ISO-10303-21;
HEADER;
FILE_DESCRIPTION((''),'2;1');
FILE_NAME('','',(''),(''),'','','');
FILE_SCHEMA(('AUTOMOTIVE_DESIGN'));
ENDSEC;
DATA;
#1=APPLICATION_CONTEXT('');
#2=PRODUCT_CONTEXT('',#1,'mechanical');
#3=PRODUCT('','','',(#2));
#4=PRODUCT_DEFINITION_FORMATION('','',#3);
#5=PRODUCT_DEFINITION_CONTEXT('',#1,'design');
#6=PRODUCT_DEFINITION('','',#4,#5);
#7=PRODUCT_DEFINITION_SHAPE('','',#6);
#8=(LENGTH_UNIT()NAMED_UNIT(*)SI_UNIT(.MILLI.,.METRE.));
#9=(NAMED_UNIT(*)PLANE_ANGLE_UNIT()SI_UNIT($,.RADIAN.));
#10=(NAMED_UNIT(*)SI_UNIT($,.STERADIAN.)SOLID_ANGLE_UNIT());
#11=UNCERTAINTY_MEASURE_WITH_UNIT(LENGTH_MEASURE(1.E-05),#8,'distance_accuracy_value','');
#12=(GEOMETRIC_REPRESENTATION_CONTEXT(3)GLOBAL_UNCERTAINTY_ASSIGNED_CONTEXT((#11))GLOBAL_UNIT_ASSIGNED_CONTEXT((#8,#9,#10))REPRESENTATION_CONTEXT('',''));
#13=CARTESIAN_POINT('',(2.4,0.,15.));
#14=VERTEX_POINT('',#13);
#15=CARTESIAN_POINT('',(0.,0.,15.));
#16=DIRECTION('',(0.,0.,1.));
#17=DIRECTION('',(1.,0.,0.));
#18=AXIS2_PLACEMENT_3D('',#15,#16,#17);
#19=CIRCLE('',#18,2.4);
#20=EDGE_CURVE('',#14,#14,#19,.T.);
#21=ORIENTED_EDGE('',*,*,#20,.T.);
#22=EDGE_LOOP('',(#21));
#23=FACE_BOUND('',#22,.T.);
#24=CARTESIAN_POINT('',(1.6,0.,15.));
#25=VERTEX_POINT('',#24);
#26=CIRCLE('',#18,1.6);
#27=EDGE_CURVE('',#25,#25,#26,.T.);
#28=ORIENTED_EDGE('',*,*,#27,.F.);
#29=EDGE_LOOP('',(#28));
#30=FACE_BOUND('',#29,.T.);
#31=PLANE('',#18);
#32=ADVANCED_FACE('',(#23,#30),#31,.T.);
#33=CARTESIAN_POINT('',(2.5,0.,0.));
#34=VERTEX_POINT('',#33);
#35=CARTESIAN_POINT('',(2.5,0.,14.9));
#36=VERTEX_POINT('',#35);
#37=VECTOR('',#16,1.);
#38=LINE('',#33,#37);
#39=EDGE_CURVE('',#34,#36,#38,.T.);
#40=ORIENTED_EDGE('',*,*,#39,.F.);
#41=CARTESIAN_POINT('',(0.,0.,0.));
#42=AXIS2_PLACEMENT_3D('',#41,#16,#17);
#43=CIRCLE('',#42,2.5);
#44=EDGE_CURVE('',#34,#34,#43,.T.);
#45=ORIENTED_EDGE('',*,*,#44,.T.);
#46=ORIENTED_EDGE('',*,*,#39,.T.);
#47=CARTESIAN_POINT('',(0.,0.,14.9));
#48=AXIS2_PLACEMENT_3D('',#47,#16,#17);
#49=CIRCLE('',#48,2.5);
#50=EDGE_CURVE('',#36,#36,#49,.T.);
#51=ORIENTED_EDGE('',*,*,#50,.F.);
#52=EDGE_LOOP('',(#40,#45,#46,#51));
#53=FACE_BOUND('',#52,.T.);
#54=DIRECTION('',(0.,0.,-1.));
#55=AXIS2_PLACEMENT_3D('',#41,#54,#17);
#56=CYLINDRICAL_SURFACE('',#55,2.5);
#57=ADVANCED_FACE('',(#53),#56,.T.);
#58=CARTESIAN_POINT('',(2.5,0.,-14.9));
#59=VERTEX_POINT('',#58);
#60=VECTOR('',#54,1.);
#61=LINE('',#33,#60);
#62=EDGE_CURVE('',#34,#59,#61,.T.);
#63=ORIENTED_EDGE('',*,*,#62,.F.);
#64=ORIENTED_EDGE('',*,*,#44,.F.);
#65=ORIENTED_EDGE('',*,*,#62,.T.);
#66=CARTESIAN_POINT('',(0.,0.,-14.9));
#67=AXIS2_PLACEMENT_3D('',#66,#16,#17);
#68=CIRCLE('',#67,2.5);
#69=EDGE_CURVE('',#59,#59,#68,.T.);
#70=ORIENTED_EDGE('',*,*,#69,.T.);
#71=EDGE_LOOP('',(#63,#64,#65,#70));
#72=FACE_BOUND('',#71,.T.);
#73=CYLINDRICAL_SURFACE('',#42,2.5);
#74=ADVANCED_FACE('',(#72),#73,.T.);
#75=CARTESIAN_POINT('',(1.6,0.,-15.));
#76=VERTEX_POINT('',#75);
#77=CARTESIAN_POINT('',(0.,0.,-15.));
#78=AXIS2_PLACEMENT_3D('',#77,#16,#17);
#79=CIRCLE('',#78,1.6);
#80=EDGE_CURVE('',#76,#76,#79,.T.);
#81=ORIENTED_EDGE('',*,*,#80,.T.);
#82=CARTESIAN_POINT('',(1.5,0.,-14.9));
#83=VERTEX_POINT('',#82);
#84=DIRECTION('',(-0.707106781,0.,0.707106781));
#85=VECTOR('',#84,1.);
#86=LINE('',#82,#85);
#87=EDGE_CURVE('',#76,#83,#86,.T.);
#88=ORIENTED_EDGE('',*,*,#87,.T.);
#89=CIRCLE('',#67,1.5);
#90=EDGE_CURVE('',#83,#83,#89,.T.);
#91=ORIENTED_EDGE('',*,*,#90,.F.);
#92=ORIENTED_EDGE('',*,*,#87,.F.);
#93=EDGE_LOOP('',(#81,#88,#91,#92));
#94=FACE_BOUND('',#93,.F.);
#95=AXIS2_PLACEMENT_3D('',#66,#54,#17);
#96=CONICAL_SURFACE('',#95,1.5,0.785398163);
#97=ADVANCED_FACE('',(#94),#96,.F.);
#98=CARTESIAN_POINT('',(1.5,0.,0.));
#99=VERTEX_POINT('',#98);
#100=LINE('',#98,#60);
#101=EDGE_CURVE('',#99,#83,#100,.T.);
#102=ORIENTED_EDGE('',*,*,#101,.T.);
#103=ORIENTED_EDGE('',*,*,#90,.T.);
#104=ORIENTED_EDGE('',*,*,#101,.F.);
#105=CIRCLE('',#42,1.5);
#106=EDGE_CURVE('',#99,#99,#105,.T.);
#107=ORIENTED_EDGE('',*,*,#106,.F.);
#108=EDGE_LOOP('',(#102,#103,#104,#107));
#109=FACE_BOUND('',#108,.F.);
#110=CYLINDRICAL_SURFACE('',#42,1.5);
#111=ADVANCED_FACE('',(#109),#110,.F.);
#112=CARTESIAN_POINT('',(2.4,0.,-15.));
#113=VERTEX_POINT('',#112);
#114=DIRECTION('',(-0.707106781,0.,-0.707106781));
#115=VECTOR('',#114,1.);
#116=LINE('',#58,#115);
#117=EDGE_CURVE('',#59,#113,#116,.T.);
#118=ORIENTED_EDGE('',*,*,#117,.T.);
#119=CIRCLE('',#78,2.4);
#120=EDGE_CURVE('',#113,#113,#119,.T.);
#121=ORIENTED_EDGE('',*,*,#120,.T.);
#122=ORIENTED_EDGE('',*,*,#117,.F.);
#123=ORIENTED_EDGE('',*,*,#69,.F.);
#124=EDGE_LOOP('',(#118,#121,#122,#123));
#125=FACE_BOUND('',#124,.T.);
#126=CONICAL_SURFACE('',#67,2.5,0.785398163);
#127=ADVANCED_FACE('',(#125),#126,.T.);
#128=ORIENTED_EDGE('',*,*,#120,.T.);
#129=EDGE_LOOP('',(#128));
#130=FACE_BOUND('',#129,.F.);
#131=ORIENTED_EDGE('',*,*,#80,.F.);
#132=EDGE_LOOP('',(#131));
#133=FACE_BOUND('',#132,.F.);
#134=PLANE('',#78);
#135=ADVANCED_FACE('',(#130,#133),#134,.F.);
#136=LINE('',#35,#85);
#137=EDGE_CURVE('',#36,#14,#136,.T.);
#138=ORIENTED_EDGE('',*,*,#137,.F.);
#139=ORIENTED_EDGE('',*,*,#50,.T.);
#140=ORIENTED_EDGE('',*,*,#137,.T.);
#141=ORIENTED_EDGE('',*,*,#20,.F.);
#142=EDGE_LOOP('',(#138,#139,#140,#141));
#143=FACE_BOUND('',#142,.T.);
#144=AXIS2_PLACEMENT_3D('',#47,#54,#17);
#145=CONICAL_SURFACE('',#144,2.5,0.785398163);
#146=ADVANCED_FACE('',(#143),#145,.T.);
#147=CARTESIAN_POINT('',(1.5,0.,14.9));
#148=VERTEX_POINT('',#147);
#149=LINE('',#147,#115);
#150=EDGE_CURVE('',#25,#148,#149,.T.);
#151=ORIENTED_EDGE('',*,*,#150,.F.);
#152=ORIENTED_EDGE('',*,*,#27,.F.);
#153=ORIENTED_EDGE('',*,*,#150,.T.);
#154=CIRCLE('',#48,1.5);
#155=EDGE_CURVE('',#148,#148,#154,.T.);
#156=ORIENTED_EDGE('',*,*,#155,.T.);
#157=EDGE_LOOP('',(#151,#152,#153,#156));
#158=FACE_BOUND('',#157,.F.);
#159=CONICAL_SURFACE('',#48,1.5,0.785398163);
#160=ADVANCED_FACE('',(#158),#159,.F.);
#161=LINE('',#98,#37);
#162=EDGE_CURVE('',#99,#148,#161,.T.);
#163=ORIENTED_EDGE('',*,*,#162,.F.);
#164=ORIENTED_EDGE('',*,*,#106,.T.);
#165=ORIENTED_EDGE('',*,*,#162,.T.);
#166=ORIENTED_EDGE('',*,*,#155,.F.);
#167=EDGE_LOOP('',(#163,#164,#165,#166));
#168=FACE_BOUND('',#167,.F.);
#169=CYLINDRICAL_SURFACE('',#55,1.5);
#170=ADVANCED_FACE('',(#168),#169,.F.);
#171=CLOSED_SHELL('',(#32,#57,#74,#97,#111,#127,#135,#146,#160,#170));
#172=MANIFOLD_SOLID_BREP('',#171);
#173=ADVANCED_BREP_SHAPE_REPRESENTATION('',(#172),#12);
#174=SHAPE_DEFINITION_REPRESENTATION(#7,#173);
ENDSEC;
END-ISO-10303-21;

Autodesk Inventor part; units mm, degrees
ref_plane "YZ Plane" through (0, 0, 0) normal (1, 0, 0) x (0, 1, 0)
ref_plane "XZ Plane" through (0, 0, 0) normal (0, 1, 0) x (-1, 0, 0)
ref_plane "XY Plane" through (0, 0, 0) normal (0, 0, 1) x (1, 0, 0)
sketch "Sketch1" plane through (0, 0, 0) normal (0, 0, 1) x (1, 0, 0)
  circle A0 centre (0, 0) radius 2.5
  circle A1 centre (0, 0) radius 1.5
  dimension "d0" = 5
  dimension "d1" = 3
extrude "Extrusion1" add sketch "Sketch1" along normal mid plane 30
thread "Thread1" size "M3x0.5" class "6H" standard "ANSI Metric M Profile" length 10
thread "Thread2" size "M3x0.5" class "6H" standard "ANSI Metric M Profile" length 10
chamfer "Chamfer1" distance 0.1 angle 45 4 edges at (-2.5, 0, 15) (-1.5, 0, 15) (-1.5, 0, -15) (-2.5, 0, -15)
properties part number "M3 30mm Standoff" material "Aluminum 6061"
